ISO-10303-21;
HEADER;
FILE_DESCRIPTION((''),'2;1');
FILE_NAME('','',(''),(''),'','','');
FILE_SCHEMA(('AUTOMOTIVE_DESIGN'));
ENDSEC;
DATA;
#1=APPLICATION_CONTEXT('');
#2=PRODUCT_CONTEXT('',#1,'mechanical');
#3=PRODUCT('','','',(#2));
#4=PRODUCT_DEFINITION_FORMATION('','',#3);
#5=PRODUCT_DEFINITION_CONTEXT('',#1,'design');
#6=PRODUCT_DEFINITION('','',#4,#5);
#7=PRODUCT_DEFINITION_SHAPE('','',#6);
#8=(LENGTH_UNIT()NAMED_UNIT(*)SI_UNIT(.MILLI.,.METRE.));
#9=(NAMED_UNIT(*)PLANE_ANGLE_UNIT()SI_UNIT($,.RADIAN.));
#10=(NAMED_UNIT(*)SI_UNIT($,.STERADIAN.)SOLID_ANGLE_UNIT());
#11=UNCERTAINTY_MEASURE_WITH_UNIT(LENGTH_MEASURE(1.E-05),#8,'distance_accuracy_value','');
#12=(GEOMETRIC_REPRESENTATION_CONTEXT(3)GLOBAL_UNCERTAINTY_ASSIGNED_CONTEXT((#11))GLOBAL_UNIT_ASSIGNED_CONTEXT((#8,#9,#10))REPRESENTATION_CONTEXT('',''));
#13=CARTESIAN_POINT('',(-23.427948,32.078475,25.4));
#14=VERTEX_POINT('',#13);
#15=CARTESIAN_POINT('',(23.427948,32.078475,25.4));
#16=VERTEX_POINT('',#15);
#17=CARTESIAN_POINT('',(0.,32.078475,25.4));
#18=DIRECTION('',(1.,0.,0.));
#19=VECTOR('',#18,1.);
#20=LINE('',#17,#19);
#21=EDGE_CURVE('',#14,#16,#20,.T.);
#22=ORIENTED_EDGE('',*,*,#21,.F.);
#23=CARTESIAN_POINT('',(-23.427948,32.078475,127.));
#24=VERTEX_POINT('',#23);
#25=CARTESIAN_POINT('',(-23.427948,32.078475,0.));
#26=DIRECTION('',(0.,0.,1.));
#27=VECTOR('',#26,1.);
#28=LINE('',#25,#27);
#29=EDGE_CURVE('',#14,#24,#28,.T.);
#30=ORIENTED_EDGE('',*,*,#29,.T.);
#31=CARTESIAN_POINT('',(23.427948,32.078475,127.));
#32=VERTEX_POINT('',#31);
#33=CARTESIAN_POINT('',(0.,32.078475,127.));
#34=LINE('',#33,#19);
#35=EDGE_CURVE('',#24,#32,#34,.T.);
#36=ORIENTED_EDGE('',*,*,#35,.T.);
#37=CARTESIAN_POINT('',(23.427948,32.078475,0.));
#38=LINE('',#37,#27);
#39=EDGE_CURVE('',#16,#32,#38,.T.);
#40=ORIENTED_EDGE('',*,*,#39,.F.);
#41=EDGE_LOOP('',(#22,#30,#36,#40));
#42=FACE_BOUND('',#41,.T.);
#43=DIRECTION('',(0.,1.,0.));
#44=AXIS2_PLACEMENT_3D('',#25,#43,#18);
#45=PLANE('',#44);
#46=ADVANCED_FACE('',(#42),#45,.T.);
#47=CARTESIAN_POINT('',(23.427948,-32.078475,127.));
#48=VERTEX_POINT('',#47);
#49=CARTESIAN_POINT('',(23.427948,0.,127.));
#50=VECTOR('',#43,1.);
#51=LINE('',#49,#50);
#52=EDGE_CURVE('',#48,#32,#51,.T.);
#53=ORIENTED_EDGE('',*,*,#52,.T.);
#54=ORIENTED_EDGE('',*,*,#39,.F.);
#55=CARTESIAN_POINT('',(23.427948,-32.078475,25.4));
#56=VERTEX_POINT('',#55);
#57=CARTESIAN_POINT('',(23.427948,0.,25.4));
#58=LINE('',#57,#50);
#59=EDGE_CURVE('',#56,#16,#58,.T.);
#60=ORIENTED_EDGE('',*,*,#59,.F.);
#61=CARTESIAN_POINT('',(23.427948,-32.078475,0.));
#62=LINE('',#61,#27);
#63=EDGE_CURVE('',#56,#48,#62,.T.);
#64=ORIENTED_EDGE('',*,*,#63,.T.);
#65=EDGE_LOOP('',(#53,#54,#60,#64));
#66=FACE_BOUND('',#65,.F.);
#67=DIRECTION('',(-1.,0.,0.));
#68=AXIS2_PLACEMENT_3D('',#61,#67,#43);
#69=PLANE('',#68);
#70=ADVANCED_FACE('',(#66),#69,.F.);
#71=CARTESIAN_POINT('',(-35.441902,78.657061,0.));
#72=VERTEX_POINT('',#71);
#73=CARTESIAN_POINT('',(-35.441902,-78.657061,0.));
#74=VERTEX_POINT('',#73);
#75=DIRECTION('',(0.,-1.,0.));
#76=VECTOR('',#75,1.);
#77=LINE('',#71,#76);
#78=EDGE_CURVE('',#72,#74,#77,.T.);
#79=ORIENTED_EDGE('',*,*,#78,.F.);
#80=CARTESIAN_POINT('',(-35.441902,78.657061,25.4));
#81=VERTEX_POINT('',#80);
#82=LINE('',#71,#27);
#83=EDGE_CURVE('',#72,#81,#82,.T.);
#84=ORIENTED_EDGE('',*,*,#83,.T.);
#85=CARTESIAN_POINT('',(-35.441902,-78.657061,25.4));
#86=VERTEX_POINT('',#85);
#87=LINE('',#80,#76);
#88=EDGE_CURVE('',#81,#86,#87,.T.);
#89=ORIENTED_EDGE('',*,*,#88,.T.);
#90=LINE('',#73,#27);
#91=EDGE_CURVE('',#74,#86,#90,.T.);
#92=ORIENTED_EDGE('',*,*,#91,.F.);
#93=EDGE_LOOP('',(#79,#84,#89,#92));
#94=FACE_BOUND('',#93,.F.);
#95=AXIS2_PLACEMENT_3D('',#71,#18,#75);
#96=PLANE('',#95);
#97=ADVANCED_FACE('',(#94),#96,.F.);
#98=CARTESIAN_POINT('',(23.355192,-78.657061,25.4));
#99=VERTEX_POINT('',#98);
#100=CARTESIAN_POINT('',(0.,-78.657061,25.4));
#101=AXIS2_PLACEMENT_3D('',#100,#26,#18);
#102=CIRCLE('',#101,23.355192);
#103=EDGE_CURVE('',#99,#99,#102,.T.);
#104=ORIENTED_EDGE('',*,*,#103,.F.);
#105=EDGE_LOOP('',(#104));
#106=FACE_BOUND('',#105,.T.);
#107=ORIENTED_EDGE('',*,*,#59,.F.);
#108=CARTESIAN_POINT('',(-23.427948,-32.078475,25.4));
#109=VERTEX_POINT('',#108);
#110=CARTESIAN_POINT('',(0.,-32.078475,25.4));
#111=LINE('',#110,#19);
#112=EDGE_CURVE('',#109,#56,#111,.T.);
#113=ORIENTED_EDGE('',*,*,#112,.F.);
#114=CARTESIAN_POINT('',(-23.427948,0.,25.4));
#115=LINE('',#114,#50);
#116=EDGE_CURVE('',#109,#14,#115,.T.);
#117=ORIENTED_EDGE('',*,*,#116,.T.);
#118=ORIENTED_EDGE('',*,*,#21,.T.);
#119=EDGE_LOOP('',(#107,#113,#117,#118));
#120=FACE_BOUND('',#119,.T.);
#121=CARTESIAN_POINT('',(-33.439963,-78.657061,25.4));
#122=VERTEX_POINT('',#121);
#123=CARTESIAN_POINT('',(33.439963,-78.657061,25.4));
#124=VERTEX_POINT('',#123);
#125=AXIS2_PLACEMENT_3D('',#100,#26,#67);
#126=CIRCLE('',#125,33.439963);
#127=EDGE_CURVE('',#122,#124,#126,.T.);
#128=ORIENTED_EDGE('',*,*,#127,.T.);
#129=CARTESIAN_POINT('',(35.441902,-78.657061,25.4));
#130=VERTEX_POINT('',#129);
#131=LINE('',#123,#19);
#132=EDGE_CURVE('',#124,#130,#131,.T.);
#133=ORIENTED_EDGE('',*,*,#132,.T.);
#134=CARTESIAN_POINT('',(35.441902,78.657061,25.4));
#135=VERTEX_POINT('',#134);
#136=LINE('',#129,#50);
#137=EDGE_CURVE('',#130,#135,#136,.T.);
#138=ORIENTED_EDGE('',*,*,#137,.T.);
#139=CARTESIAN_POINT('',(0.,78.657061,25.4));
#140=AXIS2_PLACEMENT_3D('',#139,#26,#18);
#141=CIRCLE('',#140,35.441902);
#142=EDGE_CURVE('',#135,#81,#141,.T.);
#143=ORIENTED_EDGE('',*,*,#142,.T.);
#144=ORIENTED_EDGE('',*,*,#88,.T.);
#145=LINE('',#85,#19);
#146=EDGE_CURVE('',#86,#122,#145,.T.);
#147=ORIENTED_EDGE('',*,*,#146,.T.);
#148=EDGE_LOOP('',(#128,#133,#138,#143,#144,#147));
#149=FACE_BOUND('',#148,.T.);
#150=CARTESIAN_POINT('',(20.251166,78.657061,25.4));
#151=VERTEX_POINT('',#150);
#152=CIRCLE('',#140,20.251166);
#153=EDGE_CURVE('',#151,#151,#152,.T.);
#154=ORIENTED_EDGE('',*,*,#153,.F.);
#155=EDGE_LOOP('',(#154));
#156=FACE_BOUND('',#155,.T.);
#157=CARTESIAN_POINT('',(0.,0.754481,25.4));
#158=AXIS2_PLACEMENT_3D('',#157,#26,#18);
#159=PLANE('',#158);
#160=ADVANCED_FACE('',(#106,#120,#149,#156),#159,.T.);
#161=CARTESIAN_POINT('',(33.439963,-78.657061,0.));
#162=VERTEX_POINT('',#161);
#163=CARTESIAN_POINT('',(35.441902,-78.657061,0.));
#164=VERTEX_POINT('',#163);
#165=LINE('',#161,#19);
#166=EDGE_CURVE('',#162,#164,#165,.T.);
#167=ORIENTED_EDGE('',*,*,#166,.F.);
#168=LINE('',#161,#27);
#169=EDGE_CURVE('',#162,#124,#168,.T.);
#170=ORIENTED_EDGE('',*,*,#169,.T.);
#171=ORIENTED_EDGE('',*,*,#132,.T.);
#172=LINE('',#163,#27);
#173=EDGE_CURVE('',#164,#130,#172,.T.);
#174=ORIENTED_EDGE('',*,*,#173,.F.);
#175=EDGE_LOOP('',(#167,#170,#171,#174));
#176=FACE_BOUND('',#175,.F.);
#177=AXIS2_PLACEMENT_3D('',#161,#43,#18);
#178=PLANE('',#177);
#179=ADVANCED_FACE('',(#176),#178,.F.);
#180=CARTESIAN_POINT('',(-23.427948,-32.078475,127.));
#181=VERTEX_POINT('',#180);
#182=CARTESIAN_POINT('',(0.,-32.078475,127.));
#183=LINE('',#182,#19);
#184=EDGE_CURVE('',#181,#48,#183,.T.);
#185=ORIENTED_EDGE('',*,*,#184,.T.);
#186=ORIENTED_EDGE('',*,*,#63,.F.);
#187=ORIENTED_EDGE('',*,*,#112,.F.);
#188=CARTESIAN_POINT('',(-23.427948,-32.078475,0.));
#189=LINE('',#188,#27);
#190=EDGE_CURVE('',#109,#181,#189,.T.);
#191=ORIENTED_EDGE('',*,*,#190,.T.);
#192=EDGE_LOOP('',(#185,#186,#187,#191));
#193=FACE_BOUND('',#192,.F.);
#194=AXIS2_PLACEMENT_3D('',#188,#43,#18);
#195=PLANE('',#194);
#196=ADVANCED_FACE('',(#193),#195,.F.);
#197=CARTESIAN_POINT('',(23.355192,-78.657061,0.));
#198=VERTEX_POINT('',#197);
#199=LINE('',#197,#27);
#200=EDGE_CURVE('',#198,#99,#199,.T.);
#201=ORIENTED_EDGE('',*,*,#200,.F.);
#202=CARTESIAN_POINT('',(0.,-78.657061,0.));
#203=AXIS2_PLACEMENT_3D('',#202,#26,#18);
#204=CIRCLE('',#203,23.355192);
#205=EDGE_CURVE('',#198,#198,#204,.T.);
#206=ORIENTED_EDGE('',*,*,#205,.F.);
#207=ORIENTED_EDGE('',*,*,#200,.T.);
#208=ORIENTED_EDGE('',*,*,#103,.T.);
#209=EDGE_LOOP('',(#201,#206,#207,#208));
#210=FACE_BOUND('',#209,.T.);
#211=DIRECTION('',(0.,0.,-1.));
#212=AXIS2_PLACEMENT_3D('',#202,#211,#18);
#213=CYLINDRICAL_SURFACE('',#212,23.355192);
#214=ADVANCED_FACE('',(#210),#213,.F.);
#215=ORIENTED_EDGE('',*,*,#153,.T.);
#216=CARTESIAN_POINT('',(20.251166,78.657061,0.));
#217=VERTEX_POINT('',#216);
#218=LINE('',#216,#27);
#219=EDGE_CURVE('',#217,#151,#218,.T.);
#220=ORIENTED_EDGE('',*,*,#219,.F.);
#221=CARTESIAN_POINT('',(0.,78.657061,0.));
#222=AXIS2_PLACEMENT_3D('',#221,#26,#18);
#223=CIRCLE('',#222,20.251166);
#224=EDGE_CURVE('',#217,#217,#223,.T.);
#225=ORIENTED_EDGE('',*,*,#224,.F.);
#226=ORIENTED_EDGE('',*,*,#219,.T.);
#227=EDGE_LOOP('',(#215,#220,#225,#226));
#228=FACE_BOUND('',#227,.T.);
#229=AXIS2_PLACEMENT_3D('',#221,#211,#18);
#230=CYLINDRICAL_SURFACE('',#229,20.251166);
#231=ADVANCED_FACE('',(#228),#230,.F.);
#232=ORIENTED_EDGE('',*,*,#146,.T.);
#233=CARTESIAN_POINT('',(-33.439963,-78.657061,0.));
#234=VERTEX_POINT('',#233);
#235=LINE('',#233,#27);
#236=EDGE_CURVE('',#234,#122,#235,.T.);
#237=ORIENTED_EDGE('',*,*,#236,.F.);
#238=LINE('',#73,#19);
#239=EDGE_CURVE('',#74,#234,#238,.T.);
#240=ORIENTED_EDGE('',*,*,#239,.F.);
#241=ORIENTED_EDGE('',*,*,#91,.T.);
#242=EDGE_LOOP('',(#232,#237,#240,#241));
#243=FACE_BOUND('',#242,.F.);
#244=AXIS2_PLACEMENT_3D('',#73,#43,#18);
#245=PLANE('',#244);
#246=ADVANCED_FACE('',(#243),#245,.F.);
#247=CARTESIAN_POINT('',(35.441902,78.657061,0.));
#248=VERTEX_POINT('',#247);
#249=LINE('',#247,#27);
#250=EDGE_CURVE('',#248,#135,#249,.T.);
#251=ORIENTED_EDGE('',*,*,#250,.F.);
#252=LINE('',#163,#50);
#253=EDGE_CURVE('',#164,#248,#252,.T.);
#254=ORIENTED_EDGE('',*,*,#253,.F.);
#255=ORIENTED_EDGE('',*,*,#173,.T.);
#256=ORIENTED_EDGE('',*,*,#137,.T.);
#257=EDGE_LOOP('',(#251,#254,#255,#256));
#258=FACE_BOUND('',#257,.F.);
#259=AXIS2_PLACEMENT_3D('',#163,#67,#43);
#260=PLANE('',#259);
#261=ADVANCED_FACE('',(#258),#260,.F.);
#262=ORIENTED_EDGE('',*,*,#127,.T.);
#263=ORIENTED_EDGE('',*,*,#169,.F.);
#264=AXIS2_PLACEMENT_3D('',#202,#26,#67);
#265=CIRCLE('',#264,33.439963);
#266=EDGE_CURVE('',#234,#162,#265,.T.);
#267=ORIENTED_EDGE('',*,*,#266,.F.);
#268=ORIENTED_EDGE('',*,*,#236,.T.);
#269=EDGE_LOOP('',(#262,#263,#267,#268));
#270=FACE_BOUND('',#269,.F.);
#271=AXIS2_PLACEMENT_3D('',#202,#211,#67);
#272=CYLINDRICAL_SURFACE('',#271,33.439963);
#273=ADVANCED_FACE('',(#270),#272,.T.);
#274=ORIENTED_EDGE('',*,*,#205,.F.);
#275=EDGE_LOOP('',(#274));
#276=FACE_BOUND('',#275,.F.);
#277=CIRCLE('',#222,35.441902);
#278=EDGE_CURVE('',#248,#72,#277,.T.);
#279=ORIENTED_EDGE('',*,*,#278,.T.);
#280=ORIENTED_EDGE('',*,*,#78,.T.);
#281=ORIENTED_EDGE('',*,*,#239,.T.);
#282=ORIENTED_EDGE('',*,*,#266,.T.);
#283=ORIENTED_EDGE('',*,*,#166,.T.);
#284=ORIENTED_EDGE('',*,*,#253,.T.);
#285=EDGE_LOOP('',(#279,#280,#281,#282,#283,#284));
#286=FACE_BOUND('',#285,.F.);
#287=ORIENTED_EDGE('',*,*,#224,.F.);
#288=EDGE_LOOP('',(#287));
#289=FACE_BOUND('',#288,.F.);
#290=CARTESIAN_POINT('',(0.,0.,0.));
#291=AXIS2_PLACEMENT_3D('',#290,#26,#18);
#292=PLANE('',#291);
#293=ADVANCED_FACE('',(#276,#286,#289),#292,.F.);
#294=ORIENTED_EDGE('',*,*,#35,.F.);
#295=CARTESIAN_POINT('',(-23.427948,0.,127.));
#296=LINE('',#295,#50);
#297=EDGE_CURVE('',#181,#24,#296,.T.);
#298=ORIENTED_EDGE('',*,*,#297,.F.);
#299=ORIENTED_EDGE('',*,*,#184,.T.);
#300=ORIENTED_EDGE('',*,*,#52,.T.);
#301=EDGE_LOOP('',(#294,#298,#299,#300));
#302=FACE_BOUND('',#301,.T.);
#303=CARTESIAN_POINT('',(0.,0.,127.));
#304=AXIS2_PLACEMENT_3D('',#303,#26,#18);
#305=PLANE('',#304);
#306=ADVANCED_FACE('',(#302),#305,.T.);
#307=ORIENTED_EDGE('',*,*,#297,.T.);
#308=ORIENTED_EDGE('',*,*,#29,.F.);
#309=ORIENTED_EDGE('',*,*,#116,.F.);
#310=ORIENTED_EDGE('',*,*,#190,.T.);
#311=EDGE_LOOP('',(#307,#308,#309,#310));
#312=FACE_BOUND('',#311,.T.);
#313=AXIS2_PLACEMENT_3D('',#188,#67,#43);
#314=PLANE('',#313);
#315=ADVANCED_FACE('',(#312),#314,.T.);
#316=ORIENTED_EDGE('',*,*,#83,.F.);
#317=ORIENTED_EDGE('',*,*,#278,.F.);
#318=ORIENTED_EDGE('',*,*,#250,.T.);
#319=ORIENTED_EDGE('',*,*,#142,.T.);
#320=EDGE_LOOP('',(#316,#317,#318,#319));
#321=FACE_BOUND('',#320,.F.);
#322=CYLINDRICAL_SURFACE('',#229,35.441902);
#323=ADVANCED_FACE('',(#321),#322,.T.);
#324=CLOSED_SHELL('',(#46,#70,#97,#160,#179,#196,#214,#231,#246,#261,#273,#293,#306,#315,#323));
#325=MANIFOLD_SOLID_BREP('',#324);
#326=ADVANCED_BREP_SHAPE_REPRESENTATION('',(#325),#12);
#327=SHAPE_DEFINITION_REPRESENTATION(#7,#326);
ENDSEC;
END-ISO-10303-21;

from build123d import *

# Parameters (mm, degrees)
F0_W     = 46.8558967113
F0_H     = 64.1569495201
F1_DEPTH = 127
F2_R     = 23.3551916442
F2_W     = 46.8558967113
F2_H     = 64.1569495201
F2_R_2   = 20.2511661355
F3_DEPTH = 25.4


# Not quite as in the source:
# - a feature of the source that left no trace in its solid (it failed there, or was rolled back) is left out


with BuildPart() as f1:
    # F0 (on Top) → F1 (new body)
    with BuildSketch(Plane.XY):
        Rectangle(F0_W, F0_H)
    extrude(amount=F1_DEPTH)

    # F0 (on Top) + F2 (on face) → F3 (join)
    with BuildSketch(Plane.XY):
        Rectangle(F0_W, F0_H)
    with BuildSketch(Plane.XY):
        with BuildLine():
            Line((33.4399625558, -78.6570606891), (35.4419024774, -78.6570606891))
            Line((35.4419024774, -78.6570606891), (35.4419024774, 78.6570606891))
            ThreePointArc((35.4419024774, 78.6570606891), (0, 114.0989631665), (-35.4419024774, 78.6570606891))
            Line((-35.4419024774, 78.6570606891), (-35.4419024774, -78.6570606891))
            Line((-35.4419024774, -78.6570606891), (-33.4399625558, -78.6570606891))
            ThreePointArc((-33.4399625558, -78.6570606891), (0, -112.0970232449), (33.4399625558, -78.6570606891))
        make_face()
        with Locations((0, -78.6570606891)):
            Circle(F2_R, mode=Mode.SUBTRACT)
        Rectangle(F2_W, F2_H, mode=Mode.SUBTRACT)
        with Locations((0, 78.6570606891)):
            Circle(F2_R_2, mode=Mode.SUBTRACT)
    extrude(amount=F3_DEPTH)


solid = f1.part
